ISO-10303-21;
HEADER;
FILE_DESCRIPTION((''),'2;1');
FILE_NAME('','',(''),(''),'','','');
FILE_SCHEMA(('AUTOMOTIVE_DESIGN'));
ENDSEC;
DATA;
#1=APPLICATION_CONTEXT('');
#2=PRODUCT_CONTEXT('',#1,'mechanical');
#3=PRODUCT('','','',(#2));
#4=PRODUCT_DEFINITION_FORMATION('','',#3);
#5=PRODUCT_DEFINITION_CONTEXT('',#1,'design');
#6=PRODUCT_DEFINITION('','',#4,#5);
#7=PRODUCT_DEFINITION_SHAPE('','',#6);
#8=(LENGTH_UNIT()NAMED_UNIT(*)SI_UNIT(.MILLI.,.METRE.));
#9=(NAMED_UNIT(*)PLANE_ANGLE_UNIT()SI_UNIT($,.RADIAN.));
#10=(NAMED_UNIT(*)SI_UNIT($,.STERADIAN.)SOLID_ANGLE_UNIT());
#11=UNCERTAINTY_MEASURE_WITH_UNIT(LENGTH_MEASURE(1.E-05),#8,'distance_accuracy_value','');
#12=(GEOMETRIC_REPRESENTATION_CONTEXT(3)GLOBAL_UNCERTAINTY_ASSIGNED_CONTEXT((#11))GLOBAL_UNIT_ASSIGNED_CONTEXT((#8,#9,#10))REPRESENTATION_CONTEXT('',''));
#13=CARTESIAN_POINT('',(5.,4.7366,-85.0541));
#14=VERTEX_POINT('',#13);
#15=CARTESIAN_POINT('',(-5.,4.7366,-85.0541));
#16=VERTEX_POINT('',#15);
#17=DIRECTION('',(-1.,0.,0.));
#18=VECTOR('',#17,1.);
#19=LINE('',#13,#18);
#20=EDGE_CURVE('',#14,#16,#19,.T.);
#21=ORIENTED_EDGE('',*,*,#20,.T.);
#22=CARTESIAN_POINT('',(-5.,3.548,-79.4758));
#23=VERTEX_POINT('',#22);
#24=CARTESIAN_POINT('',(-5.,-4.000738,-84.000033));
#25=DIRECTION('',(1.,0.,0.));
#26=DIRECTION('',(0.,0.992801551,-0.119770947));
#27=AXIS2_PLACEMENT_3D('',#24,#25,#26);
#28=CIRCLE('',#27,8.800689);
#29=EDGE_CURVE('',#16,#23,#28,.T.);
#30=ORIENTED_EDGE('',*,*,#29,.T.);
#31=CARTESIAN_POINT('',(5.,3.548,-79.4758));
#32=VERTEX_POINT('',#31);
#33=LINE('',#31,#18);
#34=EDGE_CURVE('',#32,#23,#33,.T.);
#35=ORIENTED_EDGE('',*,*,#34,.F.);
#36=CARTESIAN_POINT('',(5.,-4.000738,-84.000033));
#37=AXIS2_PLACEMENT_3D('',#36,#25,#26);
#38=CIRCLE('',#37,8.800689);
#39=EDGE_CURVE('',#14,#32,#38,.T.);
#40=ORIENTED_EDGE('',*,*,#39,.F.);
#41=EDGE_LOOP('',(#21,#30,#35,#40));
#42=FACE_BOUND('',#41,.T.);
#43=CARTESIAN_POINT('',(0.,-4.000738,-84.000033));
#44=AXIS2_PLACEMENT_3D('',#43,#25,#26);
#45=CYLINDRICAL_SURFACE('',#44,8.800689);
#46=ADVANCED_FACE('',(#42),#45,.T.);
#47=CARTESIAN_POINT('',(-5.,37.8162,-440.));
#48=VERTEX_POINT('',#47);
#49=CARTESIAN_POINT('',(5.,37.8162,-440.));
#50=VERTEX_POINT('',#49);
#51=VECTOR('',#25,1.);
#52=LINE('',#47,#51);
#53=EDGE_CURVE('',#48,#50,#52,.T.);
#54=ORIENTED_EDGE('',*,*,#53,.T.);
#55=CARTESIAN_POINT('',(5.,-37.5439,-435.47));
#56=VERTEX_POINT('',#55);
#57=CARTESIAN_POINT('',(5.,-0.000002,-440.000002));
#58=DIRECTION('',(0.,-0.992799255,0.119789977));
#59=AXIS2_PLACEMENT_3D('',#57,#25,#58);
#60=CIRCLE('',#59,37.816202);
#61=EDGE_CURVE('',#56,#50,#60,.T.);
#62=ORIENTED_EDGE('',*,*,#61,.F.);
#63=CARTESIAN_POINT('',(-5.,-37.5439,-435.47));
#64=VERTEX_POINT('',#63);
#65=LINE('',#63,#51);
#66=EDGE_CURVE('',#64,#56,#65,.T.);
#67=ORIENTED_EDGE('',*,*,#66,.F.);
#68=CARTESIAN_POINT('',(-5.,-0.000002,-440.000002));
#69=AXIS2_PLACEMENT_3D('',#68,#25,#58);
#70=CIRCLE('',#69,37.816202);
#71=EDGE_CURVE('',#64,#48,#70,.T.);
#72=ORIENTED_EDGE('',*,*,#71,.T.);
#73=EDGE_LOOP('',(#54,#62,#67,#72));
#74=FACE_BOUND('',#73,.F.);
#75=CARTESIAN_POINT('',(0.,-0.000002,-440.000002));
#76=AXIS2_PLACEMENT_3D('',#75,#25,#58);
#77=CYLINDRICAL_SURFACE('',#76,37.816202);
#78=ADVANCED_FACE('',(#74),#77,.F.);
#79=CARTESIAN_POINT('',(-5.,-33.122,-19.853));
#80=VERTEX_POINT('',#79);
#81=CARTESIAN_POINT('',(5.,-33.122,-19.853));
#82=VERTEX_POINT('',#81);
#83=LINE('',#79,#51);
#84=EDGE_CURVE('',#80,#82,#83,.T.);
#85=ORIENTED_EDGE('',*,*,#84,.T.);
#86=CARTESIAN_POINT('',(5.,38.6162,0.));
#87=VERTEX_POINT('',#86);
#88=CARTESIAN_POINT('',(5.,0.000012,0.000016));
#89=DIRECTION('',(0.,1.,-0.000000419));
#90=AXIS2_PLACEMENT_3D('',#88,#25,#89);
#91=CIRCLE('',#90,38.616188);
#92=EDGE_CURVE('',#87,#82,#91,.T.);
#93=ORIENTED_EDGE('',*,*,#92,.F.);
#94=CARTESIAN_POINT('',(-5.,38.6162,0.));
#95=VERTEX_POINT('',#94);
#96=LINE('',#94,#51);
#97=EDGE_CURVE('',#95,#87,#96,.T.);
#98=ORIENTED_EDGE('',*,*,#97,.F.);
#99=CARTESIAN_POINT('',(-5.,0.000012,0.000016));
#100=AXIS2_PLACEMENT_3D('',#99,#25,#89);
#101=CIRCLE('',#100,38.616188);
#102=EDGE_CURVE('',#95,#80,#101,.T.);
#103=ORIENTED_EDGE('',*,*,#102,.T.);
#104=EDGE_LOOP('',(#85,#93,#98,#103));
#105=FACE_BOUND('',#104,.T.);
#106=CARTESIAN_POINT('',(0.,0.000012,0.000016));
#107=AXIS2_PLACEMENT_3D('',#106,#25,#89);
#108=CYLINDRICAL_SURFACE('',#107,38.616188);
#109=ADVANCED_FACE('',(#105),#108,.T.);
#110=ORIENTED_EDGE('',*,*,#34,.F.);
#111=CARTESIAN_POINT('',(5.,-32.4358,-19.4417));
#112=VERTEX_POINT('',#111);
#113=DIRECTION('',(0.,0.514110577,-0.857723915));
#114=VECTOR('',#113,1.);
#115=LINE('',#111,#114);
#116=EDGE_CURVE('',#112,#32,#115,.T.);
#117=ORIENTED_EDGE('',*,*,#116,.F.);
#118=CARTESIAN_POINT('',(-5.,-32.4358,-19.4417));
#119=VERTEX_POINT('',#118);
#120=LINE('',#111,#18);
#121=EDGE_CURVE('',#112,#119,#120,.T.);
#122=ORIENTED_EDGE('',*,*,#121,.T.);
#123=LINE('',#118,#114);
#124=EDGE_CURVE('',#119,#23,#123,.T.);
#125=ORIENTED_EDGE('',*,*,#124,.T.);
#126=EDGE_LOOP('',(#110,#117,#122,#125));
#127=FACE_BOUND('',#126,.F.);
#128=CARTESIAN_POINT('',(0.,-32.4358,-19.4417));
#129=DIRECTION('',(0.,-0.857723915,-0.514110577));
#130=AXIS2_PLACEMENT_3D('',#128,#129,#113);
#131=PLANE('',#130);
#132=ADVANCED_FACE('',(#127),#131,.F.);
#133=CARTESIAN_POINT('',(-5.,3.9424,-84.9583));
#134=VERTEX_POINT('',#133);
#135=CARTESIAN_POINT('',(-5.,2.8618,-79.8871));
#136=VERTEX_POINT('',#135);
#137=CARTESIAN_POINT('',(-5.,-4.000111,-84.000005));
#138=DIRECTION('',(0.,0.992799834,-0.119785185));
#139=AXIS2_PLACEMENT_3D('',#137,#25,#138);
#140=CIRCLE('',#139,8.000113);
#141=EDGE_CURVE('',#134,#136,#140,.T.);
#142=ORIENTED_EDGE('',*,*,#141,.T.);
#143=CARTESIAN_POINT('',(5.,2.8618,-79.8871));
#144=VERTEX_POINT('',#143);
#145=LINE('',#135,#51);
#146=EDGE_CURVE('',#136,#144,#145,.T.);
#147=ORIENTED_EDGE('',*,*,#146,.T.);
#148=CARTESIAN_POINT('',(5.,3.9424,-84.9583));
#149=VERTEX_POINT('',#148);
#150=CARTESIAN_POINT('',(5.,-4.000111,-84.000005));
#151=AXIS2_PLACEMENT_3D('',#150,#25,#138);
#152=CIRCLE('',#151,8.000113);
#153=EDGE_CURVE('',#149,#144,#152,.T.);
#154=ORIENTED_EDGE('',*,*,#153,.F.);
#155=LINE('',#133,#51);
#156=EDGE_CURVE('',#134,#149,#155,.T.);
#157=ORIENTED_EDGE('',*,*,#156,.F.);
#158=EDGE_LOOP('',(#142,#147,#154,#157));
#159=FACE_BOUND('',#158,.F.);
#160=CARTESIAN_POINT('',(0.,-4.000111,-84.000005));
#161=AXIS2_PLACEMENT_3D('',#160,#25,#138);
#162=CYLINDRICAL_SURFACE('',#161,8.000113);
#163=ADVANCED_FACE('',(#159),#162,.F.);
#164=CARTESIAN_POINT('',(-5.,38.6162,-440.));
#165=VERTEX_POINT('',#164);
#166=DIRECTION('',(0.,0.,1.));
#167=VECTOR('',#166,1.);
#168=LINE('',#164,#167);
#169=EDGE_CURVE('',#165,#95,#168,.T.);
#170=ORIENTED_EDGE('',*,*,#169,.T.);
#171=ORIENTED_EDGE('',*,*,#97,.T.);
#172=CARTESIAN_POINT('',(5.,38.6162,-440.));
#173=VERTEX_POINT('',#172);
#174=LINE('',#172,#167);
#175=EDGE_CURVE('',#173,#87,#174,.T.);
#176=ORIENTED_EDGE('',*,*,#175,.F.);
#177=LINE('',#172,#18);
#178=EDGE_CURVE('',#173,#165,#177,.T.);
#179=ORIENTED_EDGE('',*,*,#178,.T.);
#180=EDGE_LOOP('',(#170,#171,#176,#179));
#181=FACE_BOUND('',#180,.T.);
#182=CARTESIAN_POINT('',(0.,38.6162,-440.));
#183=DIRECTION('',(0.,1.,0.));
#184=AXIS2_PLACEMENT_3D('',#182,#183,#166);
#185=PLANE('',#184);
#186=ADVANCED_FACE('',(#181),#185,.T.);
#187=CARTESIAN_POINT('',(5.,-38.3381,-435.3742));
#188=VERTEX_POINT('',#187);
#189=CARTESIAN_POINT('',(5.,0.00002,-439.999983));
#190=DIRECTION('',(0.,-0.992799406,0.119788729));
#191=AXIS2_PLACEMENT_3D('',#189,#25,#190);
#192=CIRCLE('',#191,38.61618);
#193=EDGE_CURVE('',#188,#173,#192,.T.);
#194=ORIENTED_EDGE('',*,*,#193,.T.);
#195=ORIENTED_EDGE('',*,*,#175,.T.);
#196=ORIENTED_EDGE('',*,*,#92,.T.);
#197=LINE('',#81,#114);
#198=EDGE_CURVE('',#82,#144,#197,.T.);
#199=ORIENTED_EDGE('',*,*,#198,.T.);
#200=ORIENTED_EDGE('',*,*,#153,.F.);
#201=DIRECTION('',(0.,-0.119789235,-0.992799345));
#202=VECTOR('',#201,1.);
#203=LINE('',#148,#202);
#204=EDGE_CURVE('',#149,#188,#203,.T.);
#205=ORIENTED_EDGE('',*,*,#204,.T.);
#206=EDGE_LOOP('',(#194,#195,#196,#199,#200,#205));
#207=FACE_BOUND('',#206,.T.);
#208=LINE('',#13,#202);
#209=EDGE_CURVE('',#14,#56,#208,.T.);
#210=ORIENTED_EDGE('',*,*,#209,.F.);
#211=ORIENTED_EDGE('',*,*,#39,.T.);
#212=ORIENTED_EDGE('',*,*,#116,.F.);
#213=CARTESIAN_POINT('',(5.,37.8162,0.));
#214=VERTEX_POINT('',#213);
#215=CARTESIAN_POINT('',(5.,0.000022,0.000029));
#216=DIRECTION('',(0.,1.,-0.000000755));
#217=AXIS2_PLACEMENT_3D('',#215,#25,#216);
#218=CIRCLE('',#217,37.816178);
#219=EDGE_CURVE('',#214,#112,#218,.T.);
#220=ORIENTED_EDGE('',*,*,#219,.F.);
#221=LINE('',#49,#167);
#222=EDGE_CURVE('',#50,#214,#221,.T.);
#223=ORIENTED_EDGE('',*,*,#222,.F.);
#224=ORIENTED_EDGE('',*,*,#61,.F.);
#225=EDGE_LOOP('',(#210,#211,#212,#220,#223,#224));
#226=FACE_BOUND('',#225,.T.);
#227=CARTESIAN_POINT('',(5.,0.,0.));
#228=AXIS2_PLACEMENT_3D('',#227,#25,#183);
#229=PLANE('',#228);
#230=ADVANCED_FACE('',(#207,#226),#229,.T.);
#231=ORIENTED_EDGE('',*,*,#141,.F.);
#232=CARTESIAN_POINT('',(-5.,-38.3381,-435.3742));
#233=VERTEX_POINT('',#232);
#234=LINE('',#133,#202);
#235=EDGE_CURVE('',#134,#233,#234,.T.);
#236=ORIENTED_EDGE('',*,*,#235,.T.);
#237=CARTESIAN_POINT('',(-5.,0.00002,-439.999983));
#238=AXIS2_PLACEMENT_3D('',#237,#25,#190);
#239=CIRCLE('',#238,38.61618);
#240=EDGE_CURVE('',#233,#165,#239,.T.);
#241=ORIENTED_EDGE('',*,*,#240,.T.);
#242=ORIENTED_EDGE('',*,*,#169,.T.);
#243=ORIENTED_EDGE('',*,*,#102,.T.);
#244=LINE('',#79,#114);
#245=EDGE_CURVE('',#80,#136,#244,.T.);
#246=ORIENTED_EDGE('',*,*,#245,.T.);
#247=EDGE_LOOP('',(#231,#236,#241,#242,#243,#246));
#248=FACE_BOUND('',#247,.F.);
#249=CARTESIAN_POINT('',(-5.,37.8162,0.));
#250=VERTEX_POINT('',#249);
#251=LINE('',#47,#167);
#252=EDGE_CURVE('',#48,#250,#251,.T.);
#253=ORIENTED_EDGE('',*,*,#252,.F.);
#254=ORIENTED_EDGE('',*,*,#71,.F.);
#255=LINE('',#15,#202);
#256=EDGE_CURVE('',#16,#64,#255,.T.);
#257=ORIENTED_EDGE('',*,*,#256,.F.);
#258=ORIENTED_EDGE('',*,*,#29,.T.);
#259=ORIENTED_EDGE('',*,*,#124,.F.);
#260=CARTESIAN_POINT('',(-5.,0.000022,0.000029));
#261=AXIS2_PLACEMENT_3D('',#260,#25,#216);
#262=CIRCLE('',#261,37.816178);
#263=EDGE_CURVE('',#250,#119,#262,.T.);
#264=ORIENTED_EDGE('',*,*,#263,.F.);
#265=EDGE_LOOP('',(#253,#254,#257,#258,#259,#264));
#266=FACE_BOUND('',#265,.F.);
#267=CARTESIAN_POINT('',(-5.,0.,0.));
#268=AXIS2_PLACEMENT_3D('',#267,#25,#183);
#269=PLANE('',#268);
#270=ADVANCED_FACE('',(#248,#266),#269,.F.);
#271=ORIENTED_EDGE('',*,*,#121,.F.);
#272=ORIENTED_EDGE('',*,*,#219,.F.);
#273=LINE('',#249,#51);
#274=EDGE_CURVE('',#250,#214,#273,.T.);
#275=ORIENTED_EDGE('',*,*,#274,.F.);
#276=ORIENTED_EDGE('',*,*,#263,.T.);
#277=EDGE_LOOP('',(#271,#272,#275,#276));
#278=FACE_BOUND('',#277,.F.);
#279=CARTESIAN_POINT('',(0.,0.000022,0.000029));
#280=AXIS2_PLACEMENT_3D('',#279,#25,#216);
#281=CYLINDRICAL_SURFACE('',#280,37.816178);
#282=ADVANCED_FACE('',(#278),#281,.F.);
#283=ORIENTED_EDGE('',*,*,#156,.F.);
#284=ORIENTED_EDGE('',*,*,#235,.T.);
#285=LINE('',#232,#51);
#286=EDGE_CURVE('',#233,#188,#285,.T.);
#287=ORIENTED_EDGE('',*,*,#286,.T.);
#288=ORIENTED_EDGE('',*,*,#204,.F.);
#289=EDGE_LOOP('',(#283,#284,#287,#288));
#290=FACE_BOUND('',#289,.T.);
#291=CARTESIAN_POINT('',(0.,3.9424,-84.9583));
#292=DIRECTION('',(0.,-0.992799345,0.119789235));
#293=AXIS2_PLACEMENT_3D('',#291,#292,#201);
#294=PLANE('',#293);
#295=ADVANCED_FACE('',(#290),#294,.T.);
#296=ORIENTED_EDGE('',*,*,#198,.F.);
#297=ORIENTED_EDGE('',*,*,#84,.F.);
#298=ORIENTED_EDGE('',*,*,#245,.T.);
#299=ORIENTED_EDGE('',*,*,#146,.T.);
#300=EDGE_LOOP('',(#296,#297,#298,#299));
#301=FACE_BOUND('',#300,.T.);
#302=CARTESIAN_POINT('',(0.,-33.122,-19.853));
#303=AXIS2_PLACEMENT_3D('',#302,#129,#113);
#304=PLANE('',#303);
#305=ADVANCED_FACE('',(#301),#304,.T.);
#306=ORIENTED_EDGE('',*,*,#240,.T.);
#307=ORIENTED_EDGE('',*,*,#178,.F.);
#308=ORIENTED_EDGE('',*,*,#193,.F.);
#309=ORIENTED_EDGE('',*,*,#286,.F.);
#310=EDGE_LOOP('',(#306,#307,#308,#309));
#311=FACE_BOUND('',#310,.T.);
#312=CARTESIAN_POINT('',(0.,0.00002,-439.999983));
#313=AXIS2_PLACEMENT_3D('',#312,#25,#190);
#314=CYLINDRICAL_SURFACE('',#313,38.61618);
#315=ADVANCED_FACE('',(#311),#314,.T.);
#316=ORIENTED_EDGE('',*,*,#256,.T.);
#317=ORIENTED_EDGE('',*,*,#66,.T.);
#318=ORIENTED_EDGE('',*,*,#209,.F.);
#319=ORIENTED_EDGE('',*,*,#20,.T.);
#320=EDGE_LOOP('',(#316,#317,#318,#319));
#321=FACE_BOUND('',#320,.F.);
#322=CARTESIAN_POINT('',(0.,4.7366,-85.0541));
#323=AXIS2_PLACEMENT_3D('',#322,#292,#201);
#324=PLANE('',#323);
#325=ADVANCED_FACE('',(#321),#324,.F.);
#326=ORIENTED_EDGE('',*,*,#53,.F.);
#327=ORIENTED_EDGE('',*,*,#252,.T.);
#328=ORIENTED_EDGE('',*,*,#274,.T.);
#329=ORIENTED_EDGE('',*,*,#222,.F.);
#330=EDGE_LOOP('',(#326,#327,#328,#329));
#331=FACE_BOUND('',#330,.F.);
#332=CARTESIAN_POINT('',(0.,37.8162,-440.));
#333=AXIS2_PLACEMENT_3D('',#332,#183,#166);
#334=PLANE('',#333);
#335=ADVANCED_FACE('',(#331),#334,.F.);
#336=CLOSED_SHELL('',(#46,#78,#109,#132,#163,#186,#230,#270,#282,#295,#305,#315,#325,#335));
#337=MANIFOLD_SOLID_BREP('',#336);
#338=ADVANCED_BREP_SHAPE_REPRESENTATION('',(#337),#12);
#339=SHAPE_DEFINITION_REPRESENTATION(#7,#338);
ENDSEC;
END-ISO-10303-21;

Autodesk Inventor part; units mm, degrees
ref_plane "YZ Plane" through (0, 0, 0) normal (1, 0, 0) x (0, 1, 0)
ref_plane "XZ Plane" through (0, 0, 0) normal (0, 1, 0) x (-1, 0, 0)
ref_plane "XY Plane" through (0, 0, 0) normal (0, 0, 1) x (1, 0, 0)
sketch "スケッチ1" plane through (0, 0, 0) normal (1, 0, 0) x (0, 1, 0)
  arc A0 (38.1972, 0) -> (-32.7626, -19.6376) centre (0, 0) ccw
  arc A1 (-37.9221, -435.4244) -> (38.1972, -440) centre (0, -440) ccw
  arc A2 (4.3584, -85.0085) -> (3.2212, -79.6717) centre (-4, -84) ccw
  line L0 (3.2212, -79.6717) -> (-32.7626, -19.6376)
  line L1 (38.1972, -440) -> (38.1972, 0)
  line L2 (4.3584, -85.0085) -> (-37.9221, -435.4244)
  arc A3 (38.6162, 0) -> (-33.122, -19.853) centre (0, 0) ccw
  line L3 (-33.122, -19.853) -> (2.8618, -79.8871)
  arc A4 (3.9424, -84.9583) -> (2.8618, -79.8871) centre (-4, -84) ccw
  line L4 (3.9424, -84.9583) -> (-38.3381, -435.3742)
  arc A5 (-38.3381, -435.3742) -> (38.6162, -440) centre (0, -440) ccw
  line L5 (38.6162, -440) -> (38.6162, 0)
  arc A6 (37.8162, 0) -> (-32.4358, -19.4417) centre (0, 0) ccw
  line L6 (-32.4358, -19.4417) -> (3.548, -79.4758)
  arc A7 (4.7366, -85.0541) -> (3.548, -79.4758) centre (-4, -84) ccw
  line L7 (4.7366, -85.0541) -> (-37.5439, -435.47)
  arc A8 (-37.5439, -435.47) -> (37.8162, -440) centre (0, -440) ccw
  line L8 (37.8162, -440) -> (37.8162, 0)
  dimension "d0" = 76.3944
  dimension "d1" = 76.3944
  dimension "d2" = 440
  dimension "d24" = 0.419
  dimension "d25" = 8
  dimension "d26" = 84
  dimension "d27" = 0.8
  dimension "d30" = 4
extrude "押し出し1" add sketch "スケッチ1" along normal mid plane 10 contours L1 A1 L2 A2 L0 A0 | L5 A5 L4 A4 L3 A3
properties part number "belt_1" material "ゴム"
